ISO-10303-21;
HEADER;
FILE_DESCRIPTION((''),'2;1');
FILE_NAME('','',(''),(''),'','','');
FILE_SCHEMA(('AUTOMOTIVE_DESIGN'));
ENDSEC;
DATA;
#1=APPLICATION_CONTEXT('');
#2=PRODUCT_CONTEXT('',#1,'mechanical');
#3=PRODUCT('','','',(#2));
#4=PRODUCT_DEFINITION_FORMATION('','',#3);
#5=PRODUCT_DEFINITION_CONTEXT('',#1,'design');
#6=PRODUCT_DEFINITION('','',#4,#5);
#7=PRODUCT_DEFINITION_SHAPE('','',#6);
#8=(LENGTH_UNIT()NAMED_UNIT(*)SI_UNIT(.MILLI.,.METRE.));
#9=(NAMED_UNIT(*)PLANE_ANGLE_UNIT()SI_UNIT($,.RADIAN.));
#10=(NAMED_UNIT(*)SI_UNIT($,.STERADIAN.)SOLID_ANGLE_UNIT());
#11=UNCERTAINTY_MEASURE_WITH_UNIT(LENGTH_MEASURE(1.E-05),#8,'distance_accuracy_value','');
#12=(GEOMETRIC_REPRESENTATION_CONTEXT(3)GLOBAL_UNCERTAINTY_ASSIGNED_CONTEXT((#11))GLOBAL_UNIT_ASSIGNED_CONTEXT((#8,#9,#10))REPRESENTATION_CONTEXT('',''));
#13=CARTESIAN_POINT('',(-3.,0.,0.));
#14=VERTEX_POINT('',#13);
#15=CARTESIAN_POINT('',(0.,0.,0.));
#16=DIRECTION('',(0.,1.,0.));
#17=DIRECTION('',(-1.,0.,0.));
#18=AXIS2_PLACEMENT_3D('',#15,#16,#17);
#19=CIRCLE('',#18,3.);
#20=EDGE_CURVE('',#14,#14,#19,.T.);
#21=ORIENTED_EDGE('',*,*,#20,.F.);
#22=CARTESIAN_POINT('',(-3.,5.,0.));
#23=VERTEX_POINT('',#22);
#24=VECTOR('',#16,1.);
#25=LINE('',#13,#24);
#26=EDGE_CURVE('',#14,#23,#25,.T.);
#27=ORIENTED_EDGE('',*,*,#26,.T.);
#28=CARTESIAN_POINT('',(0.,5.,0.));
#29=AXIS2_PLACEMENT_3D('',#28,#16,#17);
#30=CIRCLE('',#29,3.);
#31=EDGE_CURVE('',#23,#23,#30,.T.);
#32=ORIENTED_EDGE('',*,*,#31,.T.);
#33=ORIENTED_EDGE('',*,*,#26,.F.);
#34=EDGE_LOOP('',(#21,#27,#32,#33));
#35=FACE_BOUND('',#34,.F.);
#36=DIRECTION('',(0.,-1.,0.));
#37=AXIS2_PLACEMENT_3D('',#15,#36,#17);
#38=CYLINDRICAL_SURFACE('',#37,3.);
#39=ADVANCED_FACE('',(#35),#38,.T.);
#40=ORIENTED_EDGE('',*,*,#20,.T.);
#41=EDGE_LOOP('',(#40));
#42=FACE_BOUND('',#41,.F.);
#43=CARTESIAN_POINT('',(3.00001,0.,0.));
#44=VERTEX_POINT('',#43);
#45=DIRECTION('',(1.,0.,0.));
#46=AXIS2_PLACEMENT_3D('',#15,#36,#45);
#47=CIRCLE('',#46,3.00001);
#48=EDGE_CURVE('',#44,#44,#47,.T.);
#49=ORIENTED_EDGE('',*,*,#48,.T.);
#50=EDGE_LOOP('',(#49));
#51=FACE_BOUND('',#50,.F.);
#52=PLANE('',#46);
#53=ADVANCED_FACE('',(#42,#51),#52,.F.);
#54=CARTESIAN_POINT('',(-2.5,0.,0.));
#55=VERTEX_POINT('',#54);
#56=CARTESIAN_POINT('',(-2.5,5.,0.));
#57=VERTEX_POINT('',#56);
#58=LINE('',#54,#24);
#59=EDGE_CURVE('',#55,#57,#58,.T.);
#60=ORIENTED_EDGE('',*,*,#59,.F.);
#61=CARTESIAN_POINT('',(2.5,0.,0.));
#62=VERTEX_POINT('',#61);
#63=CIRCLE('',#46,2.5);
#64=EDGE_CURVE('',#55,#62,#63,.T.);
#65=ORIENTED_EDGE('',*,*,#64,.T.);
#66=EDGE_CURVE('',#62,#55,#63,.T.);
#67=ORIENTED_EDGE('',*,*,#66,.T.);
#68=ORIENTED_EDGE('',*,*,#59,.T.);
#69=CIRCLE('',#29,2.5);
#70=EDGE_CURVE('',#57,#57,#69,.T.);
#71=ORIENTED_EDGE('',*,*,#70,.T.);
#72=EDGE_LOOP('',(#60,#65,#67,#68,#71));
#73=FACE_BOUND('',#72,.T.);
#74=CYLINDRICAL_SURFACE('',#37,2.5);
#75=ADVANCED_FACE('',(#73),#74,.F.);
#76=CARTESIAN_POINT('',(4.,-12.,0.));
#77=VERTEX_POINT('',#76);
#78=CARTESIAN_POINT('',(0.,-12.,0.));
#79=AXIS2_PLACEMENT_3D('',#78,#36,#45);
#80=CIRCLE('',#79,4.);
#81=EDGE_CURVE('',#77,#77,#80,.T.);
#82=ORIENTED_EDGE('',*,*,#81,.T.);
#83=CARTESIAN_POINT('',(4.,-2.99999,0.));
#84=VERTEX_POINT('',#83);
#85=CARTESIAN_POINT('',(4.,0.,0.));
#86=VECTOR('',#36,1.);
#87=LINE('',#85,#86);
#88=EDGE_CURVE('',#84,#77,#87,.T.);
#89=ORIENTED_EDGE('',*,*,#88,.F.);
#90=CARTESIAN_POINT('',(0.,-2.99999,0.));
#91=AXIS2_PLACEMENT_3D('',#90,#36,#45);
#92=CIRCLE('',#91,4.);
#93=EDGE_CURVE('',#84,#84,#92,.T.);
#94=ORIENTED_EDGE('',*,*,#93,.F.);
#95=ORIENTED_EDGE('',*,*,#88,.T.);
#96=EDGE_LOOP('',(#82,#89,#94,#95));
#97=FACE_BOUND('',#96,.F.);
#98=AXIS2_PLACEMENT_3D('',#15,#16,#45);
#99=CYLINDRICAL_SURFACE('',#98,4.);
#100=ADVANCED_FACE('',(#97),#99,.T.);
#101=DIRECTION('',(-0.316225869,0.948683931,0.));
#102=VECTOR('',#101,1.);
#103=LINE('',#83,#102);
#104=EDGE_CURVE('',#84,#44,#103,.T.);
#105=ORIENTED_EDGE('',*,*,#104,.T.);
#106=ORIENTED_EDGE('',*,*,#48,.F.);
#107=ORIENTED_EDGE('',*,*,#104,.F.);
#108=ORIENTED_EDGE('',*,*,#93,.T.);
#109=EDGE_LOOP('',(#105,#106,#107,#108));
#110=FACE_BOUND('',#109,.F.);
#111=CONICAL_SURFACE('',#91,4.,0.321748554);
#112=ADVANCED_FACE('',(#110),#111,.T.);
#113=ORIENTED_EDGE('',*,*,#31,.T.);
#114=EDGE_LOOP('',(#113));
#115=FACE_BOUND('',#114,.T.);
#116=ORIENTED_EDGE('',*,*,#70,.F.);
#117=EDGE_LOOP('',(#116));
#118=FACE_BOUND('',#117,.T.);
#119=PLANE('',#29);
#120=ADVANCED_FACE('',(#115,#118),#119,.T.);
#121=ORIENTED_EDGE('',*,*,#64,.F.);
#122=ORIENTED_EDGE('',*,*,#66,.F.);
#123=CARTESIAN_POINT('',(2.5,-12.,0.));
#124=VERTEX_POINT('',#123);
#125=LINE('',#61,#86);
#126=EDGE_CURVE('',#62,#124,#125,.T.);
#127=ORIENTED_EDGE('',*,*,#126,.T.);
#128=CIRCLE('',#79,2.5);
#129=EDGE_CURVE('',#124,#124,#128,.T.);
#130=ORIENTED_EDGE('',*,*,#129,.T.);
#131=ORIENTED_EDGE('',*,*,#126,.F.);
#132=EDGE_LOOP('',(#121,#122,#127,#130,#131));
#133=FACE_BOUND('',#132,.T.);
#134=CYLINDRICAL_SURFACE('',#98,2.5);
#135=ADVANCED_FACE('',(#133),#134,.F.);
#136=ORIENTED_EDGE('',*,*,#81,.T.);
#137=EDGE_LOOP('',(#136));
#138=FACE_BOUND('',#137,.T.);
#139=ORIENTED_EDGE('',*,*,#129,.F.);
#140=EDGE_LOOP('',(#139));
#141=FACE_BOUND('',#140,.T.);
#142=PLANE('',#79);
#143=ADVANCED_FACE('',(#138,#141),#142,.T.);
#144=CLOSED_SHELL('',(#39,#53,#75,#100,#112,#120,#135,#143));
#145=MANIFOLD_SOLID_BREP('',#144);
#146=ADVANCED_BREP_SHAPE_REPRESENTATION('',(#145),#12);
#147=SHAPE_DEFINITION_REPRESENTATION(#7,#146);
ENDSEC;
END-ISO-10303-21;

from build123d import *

# Parameters (mm, degrees)
F0_R     = 4
F0_R_2   = 2.5
F1_DEPTH = 12
F2_R     = 3
F2_R_2   = 2.5
F3_DEPTH = 5
F4_SIZE2 = 0.99999
F4_SIZE  = 2.99999


# Not quite as in the source:
# - a fillet or chamfer is up to 0.001 mm smaller than in the source, because OpenCascade refuses the exact size


with BuildPart() as f1:
    # F0 (on Front) → F1 (new body)
    with BuildSketch(Plane.XZ):
        Circle(F0_R)
        Circle(F0_R_2, mode=Mode.SUBTRACT)
    extrude(amount=F1_DEPTH)

    # F2 (on face) → F3 (join)
    with BuildSketch(Plane(origin=(0, 0, 0), x_dir=(-1, 0, 0), z_dir=(0, 1, 0))):
        Circle(F2_R)
        Circle(F2_R_2, mode=Mode.SUBTRACT)
    extrude(amount=F3_DEPTH)

    # F4 (size 3 and 1 in the source; OpenCascade refuses exactly that, so slightly less here)
    f4_edges = [f1.edges().sort_by_distance(p)[0] for p in [
        (-4, 0, 0),
    ]]
    f4_side = f1.faces().sort_by_distance((-4, -6, 0))[0]
    chamfer(f4_edges, length=F4_SIZE, length2=F4_SIZE2, reference=f4_side)


solid = f1.part
